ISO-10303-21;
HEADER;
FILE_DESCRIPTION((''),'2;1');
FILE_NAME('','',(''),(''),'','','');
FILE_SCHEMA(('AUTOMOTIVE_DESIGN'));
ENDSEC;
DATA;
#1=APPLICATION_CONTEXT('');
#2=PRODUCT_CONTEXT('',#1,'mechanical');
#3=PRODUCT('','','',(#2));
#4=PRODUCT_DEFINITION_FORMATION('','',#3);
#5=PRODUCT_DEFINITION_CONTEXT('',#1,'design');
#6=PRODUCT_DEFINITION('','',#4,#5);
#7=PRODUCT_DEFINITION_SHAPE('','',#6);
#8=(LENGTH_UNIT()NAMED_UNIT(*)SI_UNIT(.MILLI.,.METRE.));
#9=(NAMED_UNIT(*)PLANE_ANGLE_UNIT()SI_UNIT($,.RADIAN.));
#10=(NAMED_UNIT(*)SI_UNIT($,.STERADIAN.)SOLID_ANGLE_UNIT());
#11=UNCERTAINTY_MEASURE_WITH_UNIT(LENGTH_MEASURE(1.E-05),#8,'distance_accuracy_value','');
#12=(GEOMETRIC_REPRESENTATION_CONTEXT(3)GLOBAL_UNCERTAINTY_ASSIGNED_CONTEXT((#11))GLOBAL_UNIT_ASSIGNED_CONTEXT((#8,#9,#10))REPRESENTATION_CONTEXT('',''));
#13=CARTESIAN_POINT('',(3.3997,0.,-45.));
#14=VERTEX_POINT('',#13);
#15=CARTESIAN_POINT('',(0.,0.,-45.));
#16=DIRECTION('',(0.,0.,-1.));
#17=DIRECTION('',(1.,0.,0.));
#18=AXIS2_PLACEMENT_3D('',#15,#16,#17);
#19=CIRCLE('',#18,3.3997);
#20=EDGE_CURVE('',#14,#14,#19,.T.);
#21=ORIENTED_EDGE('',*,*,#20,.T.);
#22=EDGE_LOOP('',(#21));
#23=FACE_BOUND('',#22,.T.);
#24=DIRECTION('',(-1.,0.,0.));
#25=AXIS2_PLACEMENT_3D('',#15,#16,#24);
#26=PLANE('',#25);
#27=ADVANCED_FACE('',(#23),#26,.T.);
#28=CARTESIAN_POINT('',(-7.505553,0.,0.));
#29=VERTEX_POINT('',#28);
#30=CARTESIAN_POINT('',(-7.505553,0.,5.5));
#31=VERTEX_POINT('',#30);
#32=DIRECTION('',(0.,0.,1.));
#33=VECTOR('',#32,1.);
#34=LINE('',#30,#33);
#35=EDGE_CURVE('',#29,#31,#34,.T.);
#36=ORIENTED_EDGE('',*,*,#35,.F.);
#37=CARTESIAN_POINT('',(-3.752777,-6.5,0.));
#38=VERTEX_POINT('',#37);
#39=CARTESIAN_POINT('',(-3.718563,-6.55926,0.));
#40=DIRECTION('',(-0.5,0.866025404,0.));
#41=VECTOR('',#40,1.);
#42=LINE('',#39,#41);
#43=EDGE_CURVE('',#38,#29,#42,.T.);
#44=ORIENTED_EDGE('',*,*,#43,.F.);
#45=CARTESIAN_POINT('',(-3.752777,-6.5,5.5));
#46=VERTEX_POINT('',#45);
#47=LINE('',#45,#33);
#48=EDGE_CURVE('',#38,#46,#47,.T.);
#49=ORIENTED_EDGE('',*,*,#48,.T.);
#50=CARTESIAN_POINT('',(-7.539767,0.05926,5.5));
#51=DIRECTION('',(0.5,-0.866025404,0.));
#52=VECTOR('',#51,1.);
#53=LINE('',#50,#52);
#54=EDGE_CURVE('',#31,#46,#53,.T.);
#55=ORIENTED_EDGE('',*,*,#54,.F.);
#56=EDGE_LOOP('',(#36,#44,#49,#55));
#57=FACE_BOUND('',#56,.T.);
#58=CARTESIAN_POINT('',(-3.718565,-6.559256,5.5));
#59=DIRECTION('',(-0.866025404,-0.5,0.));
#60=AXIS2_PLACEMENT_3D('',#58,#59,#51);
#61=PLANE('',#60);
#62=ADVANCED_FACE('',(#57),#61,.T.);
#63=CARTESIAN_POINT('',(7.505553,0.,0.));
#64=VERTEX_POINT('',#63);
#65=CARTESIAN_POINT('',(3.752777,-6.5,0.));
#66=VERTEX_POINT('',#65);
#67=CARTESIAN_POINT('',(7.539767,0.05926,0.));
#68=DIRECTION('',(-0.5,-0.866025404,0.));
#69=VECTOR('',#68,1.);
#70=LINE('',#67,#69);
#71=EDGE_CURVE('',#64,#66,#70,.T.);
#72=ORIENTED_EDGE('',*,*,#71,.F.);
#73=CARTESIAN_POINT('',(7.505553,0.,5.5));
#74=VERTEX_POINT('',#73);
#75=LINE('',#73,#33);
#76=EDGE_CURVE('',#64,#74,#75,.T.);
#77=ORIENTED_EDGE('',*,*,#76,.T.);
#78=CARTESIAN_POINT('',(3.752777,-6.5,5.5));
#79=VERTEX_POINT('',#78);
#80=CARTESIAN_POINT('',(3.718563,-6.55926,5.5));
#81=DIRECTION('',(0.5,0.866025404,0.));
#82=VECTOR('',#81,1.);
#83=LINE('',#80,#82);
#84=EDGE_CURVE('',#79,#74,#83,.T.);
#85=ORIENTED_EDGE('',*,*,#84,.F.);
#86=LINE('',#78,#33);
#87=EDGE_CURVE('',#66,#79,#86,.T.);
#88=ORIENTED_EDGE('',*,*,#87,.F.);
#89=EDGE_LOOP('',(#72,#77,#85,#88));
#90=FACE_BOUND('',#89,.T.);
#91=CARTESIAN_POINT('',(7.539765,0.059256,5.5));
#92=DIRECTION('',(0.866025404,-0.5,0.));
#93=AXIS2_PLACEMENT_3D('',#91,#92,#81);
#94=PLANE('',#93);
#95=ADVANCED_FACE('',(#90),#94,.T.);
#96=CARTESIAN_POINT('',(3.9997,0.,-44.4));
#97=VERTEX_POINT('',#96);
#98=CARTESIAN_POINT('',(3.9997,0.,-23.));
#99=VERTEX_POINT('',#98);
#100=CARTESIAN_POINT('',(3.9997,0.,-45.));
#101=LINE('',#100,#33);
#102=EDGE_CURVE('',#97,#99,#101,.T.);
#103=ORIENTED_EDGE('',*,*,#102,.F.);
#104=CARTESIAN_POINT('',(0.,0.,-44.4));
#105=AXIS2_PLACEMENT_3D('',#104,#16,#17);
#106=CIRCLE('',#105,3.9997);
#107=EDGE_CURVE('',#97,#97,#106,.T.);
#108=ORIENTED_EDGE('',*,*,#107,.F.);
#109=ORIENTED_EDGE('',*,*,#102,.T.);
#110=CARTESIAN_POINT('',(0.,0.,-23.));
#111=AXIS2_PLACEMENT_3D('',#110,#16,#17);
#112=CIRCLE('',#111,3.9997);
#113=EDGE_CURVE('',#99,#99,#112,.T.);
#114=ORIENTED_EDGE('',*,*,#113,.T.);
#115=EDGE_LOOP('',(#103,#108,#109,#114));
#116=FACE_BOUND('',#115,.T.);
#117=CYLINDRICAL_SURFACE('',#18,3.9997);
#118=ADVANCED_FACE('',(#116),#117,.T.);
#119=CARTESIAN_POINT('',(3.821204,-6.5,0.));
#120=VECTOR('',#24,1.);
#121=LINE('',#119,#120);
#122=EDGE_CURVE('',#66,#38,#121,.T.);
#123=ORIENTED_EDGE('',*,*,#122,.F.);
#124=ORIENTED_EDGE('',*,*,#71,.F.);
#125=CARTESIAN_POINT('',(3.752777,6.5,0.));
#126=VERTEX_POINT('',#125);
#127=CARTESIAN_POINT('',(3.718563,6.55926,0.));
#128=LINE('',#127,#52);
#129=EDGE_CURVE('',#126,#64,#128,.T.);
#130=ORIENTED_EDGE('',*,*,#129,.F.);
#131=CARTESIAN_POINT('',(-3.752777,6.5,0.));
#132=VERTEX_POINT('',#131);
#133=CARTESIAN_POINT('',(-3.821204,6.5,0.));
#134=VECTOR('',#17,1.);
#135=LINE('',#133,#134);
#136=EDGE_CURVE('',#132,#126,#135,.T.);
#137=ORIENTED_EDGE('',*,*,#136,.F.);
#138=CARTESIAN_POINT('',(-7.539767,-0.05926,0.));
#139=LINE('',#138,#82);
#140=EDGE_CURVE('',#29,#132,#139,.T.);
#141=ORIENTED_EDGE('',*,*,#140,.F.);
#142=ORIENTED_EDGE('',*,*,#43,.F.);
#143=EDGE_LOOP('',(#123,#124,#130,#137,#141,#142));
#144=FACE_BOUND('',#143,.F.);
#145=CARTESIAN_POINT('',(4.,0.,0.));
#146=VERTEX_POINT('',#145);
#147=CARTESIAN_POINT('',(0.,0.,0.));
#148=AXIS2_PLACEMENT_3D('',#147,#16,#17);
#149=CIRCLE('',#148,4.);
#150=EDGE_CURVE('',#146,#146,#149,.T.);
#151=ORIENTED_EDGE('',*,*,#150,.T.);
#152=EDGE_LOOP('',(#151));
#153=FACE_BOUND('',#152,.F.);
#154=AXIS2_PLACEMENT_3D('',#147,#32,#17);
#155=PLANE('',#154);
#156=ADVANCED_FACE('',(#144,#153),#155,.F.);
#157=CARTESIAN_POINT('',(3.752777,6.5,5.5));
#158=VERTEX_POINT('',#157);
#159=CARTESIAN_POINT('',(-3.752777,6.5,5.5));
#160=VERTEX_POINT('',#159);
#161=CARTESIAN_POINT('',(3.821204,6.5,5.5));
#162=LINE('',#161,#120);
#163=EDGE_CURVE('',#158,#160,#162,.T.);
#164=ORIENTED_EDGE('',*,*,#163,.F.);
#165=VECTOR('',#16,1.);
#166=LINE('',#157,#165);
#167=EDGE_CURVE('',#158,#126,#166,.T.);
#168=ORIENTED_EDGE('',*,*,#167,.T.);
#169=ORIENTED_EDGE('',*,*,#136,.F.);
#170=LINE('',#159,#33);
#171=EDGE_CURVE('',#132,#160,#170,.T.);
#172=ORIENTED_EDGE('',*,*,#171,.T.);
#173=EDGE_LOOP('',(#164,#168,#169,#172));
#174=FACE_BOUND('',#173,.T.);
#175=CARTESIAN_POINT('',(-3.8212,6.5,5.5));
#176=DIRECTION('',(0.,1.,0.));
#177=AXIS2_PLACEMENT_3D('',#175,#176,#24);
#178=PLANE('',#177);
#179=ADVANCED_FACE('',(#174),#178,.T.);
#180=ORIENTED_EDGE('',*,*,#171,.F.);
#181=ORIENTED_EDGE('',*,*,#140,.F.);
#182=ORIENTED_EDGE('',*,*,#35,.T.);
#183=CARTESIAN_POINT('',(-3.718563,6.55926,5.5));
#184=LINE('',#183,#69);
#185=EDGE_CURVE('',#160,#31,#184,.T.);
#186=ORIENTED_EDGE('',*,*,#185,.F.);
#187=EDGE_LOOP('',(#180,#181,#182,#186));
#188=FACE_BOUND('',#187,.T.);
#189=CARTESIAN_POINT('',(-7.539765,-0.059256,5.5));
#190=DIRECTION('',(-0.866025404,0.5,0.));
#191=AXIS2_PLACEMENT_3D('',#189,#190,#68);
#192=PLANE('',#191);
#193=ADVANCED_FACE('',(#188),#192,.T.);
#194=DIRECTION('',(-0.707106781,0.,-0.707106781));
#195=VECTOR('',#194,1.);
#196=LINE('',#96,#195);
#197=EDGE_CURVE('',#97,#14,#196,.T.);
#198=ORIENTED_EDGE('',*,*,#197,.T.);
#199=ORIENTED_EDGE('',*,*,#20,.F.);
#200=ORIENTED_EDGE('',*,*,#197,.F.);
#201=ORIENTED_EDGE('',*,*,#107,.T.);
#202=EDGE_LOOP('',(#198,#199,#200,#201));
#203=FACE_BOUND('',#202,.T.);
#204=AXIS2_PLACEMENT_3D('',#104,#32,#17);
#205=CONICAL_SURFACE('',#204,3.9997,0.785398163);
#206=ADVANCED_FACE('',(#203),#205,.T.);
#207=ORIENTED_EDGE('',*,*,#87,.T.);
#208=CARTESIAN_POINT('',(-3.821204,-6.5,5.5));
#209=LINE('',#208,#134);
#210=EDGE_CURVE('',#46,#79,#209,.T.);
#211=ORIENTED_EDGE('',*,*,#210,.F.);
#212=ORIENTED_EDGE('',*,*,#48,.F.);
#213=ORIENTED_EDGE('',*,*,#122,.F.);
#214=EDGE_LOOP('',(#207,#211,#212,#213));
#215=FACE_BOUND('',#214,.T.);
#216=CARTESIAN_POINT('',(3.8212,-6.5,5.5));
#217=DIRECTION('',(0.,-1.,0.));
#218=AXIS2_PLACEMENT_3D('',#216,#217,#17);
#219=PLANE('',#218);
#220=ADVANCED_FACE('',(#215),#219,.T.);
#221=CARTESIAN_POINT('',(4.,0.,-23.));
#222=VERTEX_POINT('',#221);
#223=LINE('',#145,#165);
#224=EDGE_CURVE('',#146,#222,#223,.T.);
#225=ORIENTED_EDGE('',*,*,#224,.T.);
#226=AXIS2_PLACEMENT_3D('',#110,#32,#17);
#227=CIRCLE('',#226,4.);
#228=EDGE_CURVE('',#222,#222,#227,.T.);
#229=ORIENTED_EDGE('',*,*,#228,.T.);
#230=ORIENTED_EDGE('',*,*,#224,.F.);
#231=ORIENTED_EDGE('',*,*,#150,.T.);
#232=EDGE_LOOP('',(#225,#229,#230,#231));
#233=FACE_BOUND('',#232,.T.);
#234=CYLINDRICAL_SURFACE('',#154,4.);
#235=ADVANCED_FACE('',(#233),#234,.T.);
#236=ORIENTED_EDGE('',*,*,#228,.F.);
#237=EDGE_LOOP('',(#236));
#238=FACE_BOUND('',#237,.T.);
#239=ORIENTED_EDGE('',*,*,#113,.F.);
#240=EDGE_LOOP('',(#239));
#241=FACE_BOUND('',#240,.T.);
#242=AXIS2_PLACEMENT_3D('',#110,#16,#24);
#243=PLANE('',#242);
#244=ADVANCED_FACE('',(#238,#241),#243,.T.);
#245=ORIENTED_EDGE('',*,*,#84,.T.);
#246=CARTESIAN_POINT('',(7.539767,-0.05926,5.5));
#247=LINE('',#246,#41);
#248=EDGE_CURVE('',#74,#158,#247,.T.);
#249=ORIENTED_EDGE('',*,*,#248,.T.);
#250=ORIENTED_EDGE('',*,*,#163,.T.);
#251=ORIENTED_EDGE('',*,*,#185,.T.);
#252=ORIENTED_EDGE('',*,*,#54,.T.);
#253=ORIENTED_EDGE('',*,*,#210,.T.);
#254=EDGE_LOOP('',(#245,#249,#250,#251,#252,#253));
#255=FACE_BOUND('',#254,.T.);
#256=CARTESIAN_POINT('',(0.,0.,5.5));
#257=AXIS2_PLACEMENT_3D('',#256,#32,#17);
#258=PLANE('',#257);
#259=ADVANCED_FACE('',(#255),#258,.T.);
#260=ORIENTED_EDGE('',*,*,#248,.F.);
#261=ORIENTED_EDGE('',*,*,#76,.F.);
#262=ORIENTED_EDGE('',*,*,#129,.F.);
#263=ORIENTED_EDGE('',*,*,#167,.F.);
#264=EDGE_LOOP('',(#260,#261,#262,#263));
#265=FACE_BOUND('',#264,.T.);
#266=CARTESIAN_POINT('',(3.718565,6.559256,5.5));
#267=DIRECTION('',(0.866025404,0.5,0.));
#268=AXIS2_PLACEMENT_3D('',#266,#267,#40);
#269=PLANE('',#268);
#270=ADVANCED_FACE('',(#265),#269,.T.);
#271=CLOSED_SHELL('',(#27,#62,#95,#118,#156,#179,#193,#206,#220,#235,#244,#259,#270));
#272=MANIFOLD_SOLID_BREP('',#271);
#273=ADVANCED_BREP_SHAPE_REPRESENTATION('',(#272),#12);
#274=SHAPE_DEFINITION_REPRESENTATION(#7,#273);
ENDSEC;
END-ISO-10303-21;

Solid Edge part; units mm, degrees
sketch "Sketch1" plane through (0, 0, 0) normal (0, 0, 1) x (1, 0, 0)
  circle A0 centre (0, 0) radius 7.54
  dimension "D1" = 15.08
extrude "Protrusion1" add sketch "Sketch1" along normal blind 5.5
sketch "Sketch2" plane through (0, 0, 0) normal (0, 0, -1) x (1, 0, 0)
  circle A0 centre (0, 0) radius 4
extrude "Protrusion2" add sketch "Sketch2" along normal blind 45
sketch "Sketch3" plane through (0, 0, -45) normal (0, 0, -1) x (1, 0, 0)
  circle A0 centre (0, 0) radius 3.9997
extrude "Cutout1" cut sketch "Sketch3" against normal blind 22 flip side to cut
chamfer "Chamfer_1" distance 0.6 angle 45 1 edges at (-3.9997, 0, -45)
sketch "Sketch4" plane through (0, 0, 5.5) normal (0, 0, 1) x (1, 0, 0)
  line L0 (-3.8212, 6.5) -> (3.8212, 6.5)
  dimension "D1" = 13
extrude "Cutout2" cut sketch "Sketch4" against normal up to next material side at (0, 6.55, 5.5)
pattern_circular "Pattern1" count 6 over 360 about axis through (0, 0, 5.5) along (0, 0, 1) of "Cutout2"
properties part number "24106071"
